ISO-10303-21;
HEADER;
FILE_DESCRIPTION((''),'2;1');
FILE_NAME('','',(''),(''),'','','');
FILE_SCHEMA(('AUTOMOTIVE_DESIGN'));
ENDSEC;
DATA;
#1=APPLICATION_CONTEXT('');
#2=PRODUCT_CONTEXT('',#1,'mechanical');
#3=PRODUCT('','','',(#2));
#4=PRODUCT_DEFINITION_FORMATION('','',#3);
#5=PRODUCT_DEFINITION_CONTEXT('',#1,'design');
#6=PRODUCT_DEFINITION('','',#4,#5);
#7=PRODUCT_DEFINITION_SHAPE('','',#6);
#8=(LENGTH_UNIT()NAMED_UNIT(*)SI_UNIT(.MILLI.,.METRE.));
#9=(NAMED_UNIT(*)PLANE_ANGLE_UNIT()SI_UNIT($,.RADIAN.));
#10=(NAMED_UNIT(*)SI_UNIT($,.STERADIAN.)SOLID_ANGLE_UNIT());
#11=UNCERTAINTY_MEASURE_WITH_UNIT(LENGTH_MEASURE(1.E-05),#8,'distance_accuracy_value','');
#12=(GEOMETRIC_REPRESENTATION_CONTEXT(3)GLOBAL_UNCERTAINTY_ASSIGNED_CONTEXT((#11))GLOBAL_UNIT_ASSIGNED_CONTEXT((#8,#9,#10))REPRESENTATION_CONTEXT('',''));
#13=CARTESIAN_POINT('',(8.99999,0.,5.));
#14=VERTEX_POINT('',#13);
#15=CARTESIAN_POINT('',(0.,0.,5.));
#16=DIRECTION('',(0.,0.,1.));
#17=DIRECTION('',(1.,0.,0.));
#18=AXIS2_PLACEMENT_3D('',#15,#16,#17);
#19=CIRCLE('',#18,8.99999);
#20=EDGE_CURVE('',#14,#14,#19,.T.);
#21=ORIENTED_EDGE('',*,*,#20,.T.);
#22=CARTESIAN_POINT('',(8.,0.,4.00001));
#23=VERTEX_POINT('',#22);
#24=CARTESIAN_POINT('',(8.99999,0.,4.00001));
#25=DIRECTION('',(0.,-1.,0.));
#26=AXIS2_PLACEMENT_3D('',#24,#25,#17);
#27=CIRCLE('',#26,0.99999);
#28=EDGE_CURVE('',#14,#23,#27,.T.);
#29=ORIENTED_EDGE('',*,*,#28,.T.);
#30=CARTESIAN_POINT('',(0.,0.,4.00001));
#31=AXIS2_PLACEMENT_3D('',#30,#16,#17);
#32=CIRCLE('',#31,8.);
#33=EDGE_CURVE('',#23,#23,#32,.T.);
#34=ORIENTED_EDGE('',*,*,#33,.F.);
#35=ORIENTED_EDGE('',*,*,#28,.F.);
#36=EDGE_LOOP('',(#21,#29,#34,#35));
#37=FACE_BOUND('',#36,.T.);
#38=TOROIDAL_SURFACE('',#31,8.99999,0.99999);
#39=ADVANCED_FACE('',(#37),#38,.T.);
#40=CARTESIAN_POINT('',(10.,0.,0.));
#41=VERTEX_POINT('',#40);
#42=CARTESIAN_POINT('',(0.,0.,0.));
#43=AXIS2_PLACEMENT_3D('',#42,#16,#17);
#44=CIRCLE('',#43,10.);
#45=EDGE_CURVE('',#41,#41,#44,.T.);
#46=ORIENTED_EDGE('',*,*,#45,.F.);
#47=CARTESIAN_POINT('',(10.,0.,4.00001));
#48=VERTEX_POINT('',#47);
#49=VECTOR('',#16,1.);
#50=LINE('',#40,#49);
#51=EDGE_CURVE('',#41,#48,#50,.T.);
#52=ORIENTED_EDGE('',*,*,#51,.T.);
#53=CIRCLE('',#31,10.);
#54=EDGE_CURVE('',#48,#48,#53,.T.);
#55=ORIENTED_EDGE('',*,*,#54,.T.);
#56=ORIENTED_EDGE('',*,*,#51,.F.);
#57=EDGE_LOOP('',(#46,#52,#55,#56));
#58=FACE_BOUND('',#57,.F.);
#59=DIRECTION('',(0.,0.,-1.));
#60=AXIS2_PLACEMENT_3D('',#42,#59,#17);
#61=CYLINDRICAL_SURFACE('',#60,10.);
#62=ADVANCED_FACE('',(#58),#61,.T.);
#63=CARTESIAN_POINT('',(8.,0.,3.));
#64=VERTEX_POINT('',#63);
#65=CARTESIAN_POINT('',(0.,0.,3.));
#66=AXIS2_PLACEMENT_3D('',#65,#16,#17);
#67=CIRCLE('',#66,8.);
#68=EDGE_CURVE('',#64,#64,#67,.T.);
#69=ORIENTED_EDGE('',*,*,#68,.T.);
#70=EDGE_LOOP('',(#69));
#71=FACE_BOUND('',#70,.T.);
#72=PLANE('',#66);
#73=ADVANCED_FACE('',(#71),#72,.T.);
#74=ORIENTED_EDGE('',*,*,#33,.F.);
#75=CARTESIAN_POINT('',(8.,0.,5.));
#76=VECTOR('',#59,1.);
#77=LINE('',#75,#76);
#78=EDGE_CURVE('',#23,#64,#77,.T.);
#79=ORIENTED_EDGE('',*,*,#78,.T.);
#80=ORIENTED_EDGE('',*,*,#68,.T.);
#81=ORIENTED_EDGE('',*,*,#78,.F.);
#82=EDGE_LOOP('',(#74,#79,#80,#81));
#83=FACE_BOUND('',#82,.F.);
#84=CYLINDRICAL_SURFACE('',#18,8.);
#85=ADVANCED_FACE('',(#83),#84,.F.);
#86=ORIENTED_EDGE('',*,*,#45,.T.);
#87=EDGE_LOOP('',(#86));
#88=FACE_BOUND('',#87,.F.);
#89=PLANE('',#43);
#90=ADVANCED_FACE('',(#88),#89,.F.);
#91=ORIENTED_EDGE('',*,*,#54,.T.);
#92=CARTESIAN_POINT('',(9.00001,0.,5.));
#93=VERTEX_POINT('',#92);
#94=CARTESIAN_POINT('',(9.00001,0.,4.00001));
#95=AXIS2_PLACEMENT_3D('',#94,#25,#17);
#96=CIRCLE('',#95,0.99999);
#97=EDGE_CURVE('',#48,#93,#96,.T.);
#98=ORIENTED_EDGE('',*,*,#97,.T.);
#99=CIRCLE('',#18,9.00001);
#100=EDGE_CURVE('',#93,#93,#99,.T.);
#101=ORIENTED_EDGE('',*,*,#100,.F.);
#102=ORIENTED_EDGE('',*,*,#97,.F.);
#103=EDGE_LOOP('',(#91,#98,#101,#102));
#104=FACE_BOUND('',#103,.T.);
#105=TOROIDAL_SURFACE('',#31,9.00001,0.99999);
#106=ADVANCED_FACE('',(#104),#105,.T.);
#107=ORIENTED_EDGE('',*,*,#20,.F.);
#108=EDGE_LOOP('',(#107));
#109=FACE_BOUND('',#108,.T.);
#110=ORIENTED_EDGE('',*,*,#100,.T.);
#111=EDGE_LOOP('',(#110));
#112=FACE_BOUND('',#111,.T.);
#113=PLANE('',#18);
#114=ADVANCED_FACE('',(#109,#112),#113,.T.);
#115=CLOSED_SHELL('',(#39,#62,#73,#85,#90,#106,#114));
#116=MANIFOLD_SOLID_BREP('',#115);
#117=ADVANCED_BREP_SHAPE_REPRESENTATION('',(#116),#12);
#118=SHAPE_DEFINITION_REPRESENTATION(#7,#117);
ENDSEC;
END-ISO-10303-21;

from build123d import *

# Parameters (mm, degrees)
F0_R     = 10
F1_DEPTH = 5
F2_R     = 8
F3_DEPTH = 2
F4_R     = 0.99999


# Not quite as in the source:
# - a fillet or chamfer is up to 0.001 mm smaller than in the source, because OpenCascade refuses the exact size


with BuildPart() as f1:
    # F0 (on Top) → F1 (new body)
    with BuildSketch(Plane.XY):
        Circle(F0_R)
    extrude(amount=F1_DEPTH)

    # F2 (on face) → F3 (cut)
    with BuildSketch(Plane.XY.offset(5)):
        Circle(F2_R)
    extrude(amount=-F3_DEPTH, mode=Mode.SUBTRACT)

    # F4 (radius 1 in the source; OpenCascade refuses exactly that, so slightly less here)
    f4_edges = [f1.edges().sort_by_distance(p)[0] for p in [
        (-10, 0, 5),
        (-8, 0, 5),
    ]]
    fillet(f4_edges, radius=F4_R)


solid = f1.part
